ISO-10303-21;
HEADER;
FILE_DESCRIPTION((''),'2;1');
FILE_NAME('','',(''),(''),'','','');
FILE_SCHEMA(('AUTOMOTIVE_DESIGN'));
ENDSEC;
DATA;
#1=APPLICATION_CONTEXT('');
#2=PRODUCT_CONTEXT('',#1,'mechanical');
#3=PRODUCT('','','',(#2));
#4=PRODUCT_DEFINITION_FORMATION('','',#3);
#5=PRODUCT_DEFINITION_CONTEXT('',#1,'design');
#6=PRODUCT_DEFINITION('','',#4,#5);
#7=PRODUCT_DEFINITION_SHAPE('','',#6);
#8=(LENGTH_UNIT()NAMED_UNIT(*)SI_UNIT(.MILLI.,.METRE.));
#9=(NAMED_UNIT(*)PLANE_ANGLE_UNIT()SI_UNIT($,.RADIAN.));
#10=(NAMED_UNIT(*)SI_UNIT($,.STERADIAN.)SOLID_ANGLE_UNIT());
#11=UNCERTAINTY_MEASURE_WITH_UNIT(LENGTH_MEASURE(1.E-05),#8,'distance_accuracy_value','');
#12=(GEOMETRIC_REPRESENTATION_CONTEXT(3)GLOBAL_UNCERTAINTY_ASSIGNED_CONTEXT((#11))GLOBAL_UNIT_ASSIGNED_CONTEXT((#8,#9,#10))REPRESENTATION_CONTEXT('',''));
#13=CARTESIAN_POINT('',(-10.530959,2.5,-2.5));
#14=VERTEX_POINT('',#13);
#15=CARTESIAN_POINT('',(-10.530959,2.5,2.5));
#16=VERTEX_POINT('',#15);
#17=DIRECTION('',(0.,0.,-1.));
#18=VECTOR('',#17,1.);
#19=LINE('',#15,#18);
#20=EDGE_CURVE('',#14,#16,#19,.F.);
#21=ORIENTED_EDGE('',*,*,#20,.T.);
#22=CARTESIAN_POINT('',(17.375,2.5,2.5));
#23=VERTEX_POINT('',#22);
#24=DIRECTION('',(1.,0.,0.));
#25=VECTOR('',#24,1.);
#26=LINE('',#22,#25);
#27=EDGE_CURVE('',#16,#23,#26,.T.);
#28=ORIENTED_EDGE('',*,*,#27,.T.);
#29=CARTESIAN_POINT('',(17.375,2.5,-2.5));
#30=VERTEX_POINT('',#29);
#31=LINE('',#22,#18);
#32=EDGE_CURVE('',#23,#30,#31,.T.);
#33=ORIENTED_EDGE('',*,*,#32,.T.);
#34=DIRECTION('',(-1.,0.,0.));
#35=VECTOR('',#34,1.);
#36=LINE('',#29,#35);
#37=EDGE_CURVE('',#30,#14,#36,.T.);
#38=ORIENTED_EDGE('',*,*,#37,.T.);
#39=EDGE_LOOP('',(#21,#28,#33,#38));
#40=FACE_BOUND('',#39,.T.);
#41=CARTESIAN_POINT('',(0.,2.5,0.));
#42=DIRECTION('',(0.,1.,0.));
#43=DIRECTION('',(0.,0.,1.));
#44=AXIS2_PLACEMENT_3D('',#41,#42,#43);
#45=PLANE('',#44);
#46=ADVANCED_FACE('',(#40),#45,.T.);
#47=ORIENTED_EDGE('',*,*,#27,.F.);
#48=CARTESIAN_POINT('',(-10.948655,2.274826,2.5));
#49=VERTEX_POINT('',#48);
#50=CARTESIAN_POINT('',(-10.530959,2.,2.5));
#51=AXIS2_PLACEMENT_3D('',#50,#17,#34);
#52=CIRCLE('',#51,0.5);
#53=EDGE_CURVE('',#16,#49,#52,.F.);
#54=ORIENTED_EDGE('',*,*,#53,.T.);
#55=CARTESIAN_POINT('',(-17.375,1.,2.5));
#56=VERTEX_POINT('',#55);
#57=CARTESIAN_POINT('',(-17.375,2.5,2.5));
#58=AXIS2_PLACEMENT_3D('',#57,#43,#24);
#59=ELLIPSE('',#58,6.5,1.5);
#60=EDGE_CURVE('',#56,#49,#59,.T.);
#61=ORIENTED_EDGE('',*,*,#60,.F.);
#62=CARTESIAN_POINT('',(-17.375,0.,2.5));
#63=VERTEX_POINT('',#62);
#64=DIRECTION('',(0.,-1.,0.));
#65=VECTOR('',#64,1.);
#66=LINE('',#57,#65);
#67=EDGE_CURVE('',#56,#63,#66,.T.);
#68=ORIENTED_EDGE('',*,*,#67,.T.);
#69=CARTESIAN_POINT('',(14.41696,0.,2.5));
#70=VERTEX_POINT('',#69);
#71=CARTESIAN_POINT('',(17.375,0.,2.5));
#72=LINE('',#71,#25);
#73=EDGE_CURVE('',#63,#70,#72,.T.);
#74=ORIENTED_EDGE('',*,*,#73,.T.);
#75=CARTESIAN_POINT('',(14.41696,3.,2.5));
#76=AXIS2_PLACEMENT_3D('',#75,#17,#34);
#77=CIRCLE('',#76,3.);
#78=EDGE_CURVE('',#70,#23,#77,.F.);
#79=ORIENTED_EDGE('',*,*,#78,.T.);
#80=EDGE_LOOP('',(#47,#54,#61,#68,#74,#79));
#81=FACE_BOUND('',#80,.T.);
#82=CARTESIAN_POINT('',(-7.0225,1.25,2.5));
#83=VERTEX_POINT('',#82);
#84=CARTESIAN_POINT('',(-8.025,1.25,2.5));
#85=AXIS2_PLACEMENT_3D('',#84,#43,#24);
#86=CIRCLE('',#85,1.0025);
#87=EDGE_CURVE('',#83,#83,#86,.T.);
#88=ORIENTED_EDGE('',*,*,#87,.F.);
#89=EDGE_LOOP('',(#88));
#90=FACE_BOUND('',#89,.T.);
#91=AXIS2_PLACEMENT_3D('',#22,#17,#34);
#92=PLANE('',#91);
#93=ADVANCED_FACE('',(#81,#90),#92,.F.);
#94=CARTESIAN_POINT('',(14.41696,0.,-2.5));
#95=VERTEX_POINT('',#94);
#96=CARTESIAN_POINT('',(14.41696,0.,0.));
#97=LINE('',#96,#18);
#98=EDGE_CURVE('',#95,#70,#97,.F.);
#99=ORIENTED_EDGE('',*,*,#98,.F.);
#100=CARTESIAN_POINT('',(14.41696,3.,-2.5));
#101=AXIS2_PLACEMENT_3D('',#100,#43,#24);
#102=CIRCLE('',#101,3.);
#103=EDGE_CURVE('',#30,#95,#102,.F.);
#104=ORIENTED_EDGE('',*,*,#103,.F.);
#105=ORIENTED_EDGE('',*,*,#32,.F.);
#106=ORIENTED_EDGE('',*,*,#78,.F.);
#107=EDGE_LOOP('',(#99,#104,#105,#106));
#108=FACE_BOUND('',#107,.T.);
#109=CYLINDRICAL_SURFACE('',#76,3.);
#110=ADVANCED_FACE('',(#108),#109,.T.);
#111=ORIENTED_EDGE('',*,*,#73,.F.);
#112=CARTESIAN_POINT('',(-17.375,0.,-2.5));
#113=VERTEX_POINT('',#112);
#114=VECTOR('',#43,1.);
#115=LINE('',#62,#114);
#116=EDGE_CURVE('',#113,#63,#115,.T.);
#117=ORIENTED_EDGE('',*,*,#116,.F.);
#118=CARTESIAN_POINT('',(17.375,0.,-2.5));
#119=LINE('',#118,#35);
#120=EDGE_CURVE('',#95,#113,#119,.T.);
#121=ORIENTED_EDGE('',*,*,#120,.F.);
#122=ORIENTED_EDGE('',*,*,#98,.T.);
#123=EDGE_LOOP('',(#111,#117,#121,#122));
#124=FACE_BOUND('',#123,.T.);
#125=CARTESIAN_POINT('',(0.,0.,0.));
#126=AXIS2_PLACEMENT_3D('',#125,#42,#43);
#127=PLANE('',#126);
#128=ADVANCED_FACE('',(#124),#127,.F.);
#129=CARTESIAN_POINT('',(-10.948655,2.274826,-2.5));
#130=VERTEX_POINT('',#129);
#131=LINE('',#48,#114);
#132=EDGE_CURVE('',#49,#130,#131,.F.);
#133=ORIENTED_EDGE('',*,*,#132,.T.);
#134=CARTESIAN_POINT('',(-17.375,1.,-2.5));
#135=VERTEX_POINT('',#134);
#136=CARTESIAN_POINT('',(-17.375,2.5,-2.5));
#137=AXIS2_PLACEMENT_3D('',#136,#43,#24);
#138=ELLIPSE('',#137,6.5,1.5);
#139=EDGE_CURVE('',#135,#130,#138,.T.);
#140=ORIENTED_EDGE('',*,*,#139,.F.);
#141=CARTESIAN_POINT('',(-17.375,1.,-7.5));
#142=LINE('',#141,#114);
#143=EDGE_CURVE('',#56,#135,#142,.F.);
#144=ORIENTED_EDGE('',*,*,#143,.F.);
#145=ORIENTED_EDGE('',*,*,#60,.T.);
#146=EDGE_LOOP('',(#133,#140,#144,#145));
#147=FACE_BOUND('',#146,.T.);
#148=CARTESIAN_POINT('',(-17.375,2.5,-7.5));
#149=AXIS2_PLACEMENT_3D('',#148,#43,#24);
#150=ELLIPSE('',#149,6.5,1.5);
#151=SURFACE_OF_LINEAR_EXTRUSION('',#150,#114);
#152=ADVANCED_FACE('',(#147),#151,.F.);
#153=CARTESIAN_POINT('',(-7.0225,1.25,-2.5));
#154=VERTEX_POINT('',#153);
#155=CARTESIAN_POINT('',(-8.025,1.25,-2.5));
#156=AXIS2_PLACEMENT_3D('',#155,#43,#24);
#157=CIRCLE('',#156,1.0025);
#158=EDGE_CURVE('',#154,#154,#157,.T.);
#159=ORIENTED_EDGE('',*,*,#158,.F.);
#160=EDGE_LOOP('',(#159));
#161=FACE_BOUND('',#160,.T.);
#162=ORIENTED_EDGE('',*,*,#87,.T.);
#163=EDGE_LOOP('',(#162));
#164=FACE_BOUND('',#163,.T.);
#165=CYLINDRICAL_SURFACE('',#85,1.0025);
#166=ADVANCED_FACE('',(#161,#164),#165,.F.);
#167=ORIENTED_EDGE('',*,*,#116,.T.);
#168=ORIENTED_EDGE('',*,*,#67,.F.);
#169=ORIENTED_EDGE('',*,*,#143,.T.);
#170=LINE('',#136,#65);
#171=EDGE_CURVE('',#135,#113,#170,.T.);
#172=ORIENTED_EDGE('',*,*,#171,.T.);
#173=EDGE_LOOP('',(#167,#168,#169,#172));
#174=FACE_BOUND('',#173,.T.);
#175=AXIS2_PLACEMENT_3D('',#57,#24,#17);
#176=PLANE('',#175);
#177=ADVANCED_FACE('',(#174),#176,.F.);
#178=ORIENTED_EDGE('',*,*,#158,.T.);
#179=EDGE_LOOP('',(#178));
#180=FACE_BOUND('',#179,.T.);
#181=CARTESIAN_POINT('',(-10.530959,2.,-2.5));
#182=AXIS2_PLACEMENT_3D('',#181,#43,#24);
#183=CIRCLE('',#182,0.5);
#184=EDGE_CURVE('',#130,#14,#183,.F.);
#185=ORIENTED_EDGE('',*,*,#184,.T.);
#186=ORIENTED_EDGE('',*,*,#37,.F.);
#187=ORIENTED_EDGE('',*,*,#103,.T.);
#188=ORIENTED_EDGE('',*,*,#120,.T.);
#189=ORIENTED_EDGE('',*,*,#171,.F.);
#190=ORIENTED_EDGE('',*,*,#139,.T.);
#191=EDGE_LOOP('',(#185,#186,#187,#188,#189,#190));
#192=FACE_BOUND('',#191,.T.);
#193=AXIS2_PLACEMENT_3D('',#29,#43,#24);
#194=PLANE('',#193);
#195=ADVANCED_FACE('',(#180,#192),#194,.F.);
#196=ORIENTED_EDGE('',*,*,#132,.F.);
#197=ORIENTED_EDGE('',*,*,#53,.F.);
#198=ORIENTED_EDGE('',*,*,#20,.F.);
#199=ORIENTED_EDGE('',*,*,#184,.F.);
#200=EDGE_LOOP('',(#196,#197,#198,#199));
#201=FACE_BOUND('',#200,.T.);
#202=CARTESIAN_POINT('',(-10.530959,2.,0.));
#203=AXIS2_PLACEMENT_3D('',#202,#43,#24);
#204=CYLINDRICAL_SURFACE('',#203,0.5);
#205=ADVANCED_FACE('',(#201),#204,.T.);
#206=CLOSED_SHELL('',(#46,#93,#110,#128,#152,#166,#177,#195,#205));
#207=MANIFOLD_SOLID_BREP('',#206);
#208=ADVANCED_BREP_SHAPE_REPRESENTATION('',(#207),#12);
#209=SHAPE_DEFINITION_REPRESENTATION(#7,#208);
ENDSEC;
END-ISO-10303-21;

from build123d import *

# Parameters (mm, degrees)
SKETCH1_W             = 34.75
SKETCH1_H             = 5
BOSS_EXTRUDE1_DEPTH   = 2.5
F_1_0MM_DOWEL_HOLE1_D = 2.005
SKETCH15_RX           = 6.5
SKETCH15_RY           = 1.5
CUT_EXTRUDE1_DEPTH    = 10
FILLET1_START         = -3
FILLET1_DEPTH         = 6
FILLET2_R             = 3


with BuildPart() as part:
    # Sketch1 → Boss-Extrude1 (new body)
    with BuildSketch(Plane(origin=(0, 0, 0), x_dir=(1, 0, 0), z_dir=(0, 1, 0))):
        Rectangle(SKETCH1_W, SKETCH1_H)
    extrude(amount=BOSS_EXTRUDE1_DEPTH)

    # Ø1.0mm Dowel Hole1 (through all)
    with Locations(Plane.XY.offset(2.5)):
        with Locations((-8.025, 1.25)):
            Hole(F_1_0MM_DOWEL_HOLE1_D / 2)

    # Sketch15 → Cut-Extrude1 (cut)
    with BuildSketch(Plane.XY.offset(2.5)):
        with Locations((-17.375, 2.5)):
            Ellipse(SKETCH15_RX, SKETCH15_RY)
    extrude(amount=-CUT_EXTRUDE1_DEPTH, mode=Mode.SUBTRACT)

    # Fillet1: read off the stored shape, not the designer's step
    # Fillet1 outline → Fillet1 (cut)
    with BuildSketch(Plane.XY.offset(FILLET1_START)):
        with BuildLine():
            ThreePointArc((-10.948655177, 2.274826432), (-10.768220883, 2.440121129), (-10.530958598, 2.5))
            Line((-10.530958598, 2.5), (-10.875, 2.5))
            add(Edge.make_bspline(
                [(-10.948655177, 2.274826432), (-10.875, 2.386771689), (-10.875, 2.5)],
                knots=[6.120582714, 6.120582714, 6.120582714, 6.283185307, 6.283185307, 6.283185307], degree=2, weights=[0.94563875, 0.969680858, 1]))
        make_face()
    extrude(amount=FILLET1_DEPTH, mode=Mode.SUBTRACT)

    # Fillet2
    # the kernel refuses this fillet: 3 mm, written as the material it takes off along each edge
    with BuildSketch(Plane(origin=(17.375, 0, -9.895099729), x_dir=(-1, 0, 0), z_dir=(0, 0, 1))) as fillet2_piece_1:
        with BuildLine():
            CenterArc((2.958039892, -3), FILLET2_R, 90, 80.405931773)
            Line((0, -2.5), (-0.059160798, -2.49))
            ThreePointArc((-0.059160798, -2.49), (-0.06, -1.25), (-0.06, 0))
            Line((-0.06, 0), (0, 0.06))
            Line((0, 0.06), (2.958039892, 0.06))
            Line((2.958039892, 0.06), (2.958039892, 0))
        make_face()
    extrude(amount=19.790199458, mode=Mode.SUBTRACT)


solid = part.part
